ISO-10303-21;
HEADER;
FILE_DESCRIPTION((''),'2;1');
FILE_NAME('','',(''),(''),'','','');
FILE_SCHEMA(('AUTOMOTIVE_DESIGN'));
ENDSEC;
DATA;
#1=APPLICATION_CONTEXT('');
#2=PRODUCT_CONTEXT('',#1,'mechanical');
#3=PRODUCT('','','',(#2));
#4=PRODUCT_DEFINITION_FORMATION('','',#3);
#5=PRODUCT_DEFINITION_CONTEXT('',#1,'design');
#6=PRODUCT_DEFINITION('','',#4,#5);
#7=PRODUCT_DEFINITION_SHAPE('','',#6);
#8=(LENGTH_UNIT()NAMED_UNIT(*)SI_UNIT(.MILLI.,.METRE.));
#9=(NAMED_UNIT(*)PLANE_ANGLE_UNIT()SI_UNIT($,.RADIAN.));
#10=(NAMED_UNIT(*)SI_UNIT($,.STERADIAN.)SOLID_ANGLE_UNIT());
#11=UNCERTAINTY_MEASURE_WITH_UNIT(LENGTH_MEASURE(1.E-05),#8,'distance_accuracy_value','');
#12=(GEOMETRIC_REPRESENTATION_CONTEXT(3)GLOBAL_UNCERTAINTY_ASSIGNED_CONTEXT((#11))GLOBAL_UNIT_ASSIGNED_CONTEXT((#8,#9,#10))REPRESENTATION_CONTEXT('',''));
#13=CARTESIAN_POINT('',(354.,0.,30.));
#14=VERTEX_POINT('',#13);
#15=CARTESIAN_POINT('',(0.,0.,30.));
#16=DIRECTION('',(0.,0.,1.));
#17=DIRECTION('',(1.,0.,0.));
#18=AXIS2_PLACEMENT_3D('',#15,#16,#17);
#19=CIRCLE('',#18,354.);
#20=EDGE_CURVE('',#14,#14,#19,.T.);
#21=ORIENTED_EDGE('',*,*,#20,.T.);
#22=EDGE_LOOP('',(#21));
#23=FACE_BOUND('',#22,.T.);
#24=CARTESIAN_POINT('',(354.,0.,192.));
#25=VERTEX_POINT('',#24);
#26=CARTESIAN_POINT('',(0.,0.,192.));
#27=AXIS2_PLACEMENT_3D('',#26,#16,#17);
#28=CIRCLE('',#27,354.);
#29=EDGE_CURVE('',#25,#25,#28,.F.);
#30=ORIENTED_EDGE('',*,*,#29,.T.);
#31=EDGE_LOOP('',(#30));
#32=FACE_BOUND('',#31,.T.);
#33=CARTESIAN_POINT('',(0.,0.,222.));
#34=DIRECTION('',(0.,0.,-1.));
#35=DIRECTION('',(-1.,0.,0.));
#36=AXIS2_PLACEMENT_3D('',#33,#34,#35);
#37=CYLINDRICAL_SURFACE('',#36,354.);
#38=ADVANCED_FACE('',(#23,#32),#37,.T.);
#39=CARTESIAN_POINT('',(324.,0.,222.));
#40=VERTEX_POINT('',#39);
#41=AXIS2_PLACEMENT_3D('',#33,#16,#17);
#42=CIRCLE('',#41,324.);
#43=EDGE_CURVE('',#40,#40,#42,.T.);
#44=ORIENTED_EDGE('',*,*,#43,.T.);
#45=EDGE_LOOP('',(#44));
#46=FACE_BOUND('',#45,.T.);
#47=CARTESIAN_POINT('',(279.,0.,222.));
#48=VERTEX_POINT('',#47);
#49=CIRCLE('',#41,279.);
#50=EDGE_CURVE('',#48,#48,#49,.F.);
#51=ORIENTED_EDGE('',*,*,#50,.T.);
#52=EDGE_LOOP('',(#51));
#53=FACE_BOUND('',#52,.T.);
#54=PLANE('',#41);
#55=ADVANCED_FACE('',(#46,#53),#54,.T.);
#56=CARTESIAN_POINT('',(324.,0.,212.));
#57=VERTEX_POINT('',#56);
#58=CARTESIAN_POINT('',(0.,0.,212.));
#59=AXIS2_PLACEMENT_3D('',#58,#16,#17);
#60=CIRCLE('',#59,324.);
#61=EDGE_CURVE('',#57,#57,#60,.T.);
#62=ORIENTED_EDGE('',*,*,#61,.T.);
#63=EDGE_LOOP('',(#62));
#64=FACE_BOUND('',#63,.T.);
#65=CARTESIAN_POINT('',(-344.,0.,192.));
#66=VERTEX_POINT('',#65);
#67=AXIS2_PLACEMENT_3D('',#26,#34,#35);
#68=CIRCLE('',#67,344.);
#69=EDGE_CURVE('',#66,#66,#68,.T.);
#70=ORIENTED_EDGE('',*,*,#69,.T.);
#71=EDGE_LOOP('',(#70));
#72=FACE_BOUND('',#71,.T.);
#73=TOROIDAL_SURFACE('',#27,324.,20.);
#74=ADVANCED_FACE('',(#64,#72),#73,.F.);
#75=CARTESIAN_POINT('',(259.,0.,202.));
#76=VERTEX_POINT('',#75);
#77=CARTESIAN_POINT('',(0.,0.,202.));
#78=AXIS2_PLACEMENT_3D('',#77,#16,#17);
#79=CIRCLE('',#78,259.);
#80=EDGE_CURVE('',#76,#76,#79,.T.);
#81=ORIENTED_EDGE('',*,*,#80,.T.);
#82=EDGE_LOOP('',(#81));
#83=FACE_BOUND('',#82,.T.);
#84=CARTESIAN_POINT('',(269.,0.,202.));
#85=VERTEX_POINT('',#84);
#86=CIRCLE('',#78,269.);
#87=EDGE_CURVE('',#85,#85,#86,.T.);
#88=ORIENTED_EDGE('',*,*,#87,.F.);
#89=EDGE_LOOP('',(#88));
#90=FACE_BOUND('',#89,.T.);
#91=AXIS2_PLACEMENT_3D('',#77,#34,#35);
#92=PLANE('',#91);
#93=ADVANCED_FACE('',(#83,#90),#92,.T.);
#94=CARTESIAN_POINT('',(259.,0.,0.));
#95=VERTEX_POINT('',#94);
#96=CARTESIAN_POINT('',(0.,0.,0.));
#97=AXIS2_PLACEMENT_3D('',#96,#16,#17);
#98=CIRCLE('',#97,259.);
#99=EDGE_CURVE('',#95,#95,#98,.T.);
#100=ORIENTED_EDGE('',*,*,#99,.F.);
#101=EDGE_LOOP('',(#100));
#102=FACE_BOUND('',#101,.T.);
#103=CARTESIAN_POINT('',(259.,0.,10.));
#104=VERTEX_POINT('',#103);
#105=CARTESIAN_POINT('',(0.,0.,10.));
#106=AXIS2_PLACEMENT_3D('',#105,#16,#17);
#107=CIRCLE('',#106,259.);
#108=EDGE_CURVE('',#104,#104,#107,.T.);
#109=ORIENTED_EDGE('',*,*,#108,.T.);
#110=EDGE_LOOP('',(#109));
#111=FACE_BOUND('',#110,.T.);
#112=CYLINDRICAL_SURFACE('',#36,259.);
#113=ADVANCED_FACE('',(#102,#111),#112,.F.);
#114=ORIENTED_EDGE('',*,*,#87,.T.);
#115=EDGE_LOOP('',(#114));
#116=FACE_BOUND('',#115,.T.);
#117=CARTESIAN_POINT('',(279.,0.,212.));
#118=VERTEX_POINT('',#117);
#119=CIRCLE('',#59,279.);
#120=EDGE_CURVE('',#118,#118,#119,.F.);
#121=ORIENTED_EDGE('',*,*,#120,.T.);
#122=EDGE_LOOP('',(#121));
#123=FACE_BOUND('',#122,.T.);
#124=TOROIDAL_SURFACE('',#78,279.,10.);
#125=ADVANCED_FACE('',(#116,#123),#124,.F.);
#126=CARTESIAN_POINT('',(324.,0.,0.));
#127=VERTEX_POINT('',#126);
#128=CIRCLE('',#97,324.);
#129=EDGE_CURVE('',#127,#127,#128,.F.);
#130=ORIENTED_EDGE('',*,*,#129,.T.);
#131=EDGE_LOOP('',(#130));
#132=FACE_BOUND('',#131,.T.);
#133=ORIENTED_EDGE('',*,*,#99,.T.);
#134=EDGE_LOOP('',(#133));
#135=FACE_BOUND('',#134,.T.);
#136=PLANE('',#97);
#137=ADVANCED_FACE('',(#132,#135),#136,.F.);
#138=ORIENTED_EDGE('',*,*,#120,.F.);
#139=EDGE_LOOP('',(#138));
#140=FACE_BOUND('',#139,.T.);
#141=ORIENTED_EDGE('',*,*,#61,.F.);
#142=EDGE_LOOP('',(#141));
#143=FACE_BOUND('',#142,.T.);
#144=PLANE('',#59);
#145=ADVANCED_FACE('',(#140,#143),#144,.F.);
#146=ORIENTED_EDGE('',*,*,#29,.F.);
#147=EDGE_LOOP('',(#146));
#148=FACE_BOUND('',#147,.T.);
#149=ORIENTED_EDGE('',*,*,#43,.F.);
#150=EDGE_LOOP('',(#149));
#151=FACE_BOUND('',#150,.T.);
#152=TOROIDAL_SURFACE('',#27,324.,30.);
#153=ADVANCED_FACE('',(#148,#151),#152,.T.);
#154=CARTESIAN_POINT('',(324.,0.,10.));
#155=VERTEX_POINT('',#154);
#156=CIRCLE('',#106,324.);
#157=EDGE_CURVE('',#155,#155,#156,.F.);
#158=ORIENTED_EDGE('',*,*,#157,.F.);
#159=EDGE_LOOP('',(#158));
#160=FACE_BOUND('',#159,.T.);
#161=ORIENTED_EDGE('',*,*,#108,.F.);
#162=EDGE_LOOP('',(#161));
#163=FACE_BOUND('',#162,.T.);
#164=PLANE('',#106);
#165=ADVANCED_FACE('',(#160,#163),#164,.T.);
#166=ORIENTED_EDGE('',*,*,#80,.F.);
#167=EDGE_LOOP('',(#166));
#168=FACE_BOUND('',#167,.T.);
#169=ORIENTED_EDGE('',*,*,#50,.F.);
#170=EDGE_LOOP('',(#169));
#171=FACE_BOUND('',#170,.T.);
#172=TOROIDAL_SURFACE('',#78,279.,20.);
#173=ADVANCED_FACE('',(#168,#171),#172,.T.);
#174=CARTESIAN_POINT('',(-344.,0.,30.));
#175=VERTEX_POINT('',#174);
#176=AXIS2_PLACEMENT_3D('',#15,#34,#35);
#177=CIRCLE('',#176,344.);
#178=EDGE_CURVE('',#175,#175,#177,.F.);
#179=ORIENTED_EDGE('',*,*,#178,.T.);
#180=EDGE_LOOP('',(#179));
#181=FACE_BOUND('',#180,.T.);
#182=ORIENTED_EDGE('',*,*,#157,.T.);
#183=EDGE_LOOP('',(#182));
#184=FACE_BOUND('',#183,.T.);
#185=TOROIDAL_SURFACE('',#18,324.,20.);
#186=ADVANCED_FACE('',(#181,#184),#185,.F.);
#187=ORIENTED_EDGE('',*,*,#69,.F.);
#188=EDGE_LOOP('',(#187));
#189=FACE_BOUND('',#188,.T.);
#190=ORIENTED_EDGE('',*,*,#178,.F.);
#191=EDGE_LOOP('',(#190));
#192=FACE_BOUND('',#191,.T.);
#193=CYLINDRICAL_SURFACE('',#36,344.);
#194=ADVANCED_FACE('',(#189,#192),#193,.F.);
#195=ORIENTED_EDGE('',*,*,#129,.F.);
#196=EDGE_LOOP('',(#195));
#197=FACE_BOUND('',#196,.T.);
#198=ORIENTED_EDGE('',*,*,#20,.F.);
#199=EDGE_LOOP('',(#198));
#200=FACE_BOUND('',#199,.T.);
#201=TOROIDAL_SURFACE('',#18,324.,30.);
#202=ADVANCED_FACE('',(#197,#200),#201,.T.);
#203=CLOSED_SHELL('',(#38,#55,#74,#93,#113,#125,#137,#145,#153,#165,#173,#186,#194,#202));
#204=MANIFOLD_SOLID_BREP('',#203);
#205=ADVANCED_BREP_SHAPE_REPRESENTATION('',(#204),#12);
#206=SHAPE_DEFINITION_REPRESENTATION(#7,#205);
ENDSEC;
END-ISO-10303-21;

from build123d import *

# Parameters (mm, degrees)
SKETCH1_R           = 354
SKETCH1_R_2         = 259
BOSS_EXTRUDE1_DEPTH = 222
FILLET1_R           = 30
FILLET2_R           = 20


# Read off the part's stored shape, not the designer's step: Shell2
with BuildPart() as part:
    # Sketch1 → Boss-Extrude1 (new body)
    with BuildSketch(Plane.XY):
        Circle(SKETCH1_R)
        Circle(SKETCH1_R_2, mode=Mode.SUBTRACT)
    extrude(amount=BOSS_EXTRUDE1_DEPTH)

    # Fillet1
    fillet1_edges = [part.edges().sort_by_distance(p)[0] for p in [
        (-354, 0, 0),
        (-354, 0, 222),
    ]]
    fillet(fillet1_edges, radius=FILLET1_R)

    # Fillet2
    fillet2_edges = [part.edges().sort_by_distance(p)[0] for p in [
        (-259, 0, 222),
    ]]
    fillet(fillet2_edges, radius=FILLET2_R)

    # Shell2 outline → Shell2 (revolve, cut)
    with BuildSketch(Plane.XZ):
        with BuildLine():
            Line((269, 202), (259, 202))
            Line((259, 202), (259, 10))
            Line((259, 10), (324, 10))
            ThreePointArc((324, 10), (338.142135624, 15.857864376), (344, 30))
            Line((344, 30), (344, 192))
            ThreePointArc((344, 192), (338.142135624, 206.142135624), (324, 212))
            Line((324, 212), (279, 212))
            ThreePointArc((279, 212), (271.928932188, 209.071067812), (269, 202))
        make_face()
    revolve(axis=Axis((0, 0, 0), (0, 0, 1)), mode=Mode.SUBTRACT)


solid = part.part
